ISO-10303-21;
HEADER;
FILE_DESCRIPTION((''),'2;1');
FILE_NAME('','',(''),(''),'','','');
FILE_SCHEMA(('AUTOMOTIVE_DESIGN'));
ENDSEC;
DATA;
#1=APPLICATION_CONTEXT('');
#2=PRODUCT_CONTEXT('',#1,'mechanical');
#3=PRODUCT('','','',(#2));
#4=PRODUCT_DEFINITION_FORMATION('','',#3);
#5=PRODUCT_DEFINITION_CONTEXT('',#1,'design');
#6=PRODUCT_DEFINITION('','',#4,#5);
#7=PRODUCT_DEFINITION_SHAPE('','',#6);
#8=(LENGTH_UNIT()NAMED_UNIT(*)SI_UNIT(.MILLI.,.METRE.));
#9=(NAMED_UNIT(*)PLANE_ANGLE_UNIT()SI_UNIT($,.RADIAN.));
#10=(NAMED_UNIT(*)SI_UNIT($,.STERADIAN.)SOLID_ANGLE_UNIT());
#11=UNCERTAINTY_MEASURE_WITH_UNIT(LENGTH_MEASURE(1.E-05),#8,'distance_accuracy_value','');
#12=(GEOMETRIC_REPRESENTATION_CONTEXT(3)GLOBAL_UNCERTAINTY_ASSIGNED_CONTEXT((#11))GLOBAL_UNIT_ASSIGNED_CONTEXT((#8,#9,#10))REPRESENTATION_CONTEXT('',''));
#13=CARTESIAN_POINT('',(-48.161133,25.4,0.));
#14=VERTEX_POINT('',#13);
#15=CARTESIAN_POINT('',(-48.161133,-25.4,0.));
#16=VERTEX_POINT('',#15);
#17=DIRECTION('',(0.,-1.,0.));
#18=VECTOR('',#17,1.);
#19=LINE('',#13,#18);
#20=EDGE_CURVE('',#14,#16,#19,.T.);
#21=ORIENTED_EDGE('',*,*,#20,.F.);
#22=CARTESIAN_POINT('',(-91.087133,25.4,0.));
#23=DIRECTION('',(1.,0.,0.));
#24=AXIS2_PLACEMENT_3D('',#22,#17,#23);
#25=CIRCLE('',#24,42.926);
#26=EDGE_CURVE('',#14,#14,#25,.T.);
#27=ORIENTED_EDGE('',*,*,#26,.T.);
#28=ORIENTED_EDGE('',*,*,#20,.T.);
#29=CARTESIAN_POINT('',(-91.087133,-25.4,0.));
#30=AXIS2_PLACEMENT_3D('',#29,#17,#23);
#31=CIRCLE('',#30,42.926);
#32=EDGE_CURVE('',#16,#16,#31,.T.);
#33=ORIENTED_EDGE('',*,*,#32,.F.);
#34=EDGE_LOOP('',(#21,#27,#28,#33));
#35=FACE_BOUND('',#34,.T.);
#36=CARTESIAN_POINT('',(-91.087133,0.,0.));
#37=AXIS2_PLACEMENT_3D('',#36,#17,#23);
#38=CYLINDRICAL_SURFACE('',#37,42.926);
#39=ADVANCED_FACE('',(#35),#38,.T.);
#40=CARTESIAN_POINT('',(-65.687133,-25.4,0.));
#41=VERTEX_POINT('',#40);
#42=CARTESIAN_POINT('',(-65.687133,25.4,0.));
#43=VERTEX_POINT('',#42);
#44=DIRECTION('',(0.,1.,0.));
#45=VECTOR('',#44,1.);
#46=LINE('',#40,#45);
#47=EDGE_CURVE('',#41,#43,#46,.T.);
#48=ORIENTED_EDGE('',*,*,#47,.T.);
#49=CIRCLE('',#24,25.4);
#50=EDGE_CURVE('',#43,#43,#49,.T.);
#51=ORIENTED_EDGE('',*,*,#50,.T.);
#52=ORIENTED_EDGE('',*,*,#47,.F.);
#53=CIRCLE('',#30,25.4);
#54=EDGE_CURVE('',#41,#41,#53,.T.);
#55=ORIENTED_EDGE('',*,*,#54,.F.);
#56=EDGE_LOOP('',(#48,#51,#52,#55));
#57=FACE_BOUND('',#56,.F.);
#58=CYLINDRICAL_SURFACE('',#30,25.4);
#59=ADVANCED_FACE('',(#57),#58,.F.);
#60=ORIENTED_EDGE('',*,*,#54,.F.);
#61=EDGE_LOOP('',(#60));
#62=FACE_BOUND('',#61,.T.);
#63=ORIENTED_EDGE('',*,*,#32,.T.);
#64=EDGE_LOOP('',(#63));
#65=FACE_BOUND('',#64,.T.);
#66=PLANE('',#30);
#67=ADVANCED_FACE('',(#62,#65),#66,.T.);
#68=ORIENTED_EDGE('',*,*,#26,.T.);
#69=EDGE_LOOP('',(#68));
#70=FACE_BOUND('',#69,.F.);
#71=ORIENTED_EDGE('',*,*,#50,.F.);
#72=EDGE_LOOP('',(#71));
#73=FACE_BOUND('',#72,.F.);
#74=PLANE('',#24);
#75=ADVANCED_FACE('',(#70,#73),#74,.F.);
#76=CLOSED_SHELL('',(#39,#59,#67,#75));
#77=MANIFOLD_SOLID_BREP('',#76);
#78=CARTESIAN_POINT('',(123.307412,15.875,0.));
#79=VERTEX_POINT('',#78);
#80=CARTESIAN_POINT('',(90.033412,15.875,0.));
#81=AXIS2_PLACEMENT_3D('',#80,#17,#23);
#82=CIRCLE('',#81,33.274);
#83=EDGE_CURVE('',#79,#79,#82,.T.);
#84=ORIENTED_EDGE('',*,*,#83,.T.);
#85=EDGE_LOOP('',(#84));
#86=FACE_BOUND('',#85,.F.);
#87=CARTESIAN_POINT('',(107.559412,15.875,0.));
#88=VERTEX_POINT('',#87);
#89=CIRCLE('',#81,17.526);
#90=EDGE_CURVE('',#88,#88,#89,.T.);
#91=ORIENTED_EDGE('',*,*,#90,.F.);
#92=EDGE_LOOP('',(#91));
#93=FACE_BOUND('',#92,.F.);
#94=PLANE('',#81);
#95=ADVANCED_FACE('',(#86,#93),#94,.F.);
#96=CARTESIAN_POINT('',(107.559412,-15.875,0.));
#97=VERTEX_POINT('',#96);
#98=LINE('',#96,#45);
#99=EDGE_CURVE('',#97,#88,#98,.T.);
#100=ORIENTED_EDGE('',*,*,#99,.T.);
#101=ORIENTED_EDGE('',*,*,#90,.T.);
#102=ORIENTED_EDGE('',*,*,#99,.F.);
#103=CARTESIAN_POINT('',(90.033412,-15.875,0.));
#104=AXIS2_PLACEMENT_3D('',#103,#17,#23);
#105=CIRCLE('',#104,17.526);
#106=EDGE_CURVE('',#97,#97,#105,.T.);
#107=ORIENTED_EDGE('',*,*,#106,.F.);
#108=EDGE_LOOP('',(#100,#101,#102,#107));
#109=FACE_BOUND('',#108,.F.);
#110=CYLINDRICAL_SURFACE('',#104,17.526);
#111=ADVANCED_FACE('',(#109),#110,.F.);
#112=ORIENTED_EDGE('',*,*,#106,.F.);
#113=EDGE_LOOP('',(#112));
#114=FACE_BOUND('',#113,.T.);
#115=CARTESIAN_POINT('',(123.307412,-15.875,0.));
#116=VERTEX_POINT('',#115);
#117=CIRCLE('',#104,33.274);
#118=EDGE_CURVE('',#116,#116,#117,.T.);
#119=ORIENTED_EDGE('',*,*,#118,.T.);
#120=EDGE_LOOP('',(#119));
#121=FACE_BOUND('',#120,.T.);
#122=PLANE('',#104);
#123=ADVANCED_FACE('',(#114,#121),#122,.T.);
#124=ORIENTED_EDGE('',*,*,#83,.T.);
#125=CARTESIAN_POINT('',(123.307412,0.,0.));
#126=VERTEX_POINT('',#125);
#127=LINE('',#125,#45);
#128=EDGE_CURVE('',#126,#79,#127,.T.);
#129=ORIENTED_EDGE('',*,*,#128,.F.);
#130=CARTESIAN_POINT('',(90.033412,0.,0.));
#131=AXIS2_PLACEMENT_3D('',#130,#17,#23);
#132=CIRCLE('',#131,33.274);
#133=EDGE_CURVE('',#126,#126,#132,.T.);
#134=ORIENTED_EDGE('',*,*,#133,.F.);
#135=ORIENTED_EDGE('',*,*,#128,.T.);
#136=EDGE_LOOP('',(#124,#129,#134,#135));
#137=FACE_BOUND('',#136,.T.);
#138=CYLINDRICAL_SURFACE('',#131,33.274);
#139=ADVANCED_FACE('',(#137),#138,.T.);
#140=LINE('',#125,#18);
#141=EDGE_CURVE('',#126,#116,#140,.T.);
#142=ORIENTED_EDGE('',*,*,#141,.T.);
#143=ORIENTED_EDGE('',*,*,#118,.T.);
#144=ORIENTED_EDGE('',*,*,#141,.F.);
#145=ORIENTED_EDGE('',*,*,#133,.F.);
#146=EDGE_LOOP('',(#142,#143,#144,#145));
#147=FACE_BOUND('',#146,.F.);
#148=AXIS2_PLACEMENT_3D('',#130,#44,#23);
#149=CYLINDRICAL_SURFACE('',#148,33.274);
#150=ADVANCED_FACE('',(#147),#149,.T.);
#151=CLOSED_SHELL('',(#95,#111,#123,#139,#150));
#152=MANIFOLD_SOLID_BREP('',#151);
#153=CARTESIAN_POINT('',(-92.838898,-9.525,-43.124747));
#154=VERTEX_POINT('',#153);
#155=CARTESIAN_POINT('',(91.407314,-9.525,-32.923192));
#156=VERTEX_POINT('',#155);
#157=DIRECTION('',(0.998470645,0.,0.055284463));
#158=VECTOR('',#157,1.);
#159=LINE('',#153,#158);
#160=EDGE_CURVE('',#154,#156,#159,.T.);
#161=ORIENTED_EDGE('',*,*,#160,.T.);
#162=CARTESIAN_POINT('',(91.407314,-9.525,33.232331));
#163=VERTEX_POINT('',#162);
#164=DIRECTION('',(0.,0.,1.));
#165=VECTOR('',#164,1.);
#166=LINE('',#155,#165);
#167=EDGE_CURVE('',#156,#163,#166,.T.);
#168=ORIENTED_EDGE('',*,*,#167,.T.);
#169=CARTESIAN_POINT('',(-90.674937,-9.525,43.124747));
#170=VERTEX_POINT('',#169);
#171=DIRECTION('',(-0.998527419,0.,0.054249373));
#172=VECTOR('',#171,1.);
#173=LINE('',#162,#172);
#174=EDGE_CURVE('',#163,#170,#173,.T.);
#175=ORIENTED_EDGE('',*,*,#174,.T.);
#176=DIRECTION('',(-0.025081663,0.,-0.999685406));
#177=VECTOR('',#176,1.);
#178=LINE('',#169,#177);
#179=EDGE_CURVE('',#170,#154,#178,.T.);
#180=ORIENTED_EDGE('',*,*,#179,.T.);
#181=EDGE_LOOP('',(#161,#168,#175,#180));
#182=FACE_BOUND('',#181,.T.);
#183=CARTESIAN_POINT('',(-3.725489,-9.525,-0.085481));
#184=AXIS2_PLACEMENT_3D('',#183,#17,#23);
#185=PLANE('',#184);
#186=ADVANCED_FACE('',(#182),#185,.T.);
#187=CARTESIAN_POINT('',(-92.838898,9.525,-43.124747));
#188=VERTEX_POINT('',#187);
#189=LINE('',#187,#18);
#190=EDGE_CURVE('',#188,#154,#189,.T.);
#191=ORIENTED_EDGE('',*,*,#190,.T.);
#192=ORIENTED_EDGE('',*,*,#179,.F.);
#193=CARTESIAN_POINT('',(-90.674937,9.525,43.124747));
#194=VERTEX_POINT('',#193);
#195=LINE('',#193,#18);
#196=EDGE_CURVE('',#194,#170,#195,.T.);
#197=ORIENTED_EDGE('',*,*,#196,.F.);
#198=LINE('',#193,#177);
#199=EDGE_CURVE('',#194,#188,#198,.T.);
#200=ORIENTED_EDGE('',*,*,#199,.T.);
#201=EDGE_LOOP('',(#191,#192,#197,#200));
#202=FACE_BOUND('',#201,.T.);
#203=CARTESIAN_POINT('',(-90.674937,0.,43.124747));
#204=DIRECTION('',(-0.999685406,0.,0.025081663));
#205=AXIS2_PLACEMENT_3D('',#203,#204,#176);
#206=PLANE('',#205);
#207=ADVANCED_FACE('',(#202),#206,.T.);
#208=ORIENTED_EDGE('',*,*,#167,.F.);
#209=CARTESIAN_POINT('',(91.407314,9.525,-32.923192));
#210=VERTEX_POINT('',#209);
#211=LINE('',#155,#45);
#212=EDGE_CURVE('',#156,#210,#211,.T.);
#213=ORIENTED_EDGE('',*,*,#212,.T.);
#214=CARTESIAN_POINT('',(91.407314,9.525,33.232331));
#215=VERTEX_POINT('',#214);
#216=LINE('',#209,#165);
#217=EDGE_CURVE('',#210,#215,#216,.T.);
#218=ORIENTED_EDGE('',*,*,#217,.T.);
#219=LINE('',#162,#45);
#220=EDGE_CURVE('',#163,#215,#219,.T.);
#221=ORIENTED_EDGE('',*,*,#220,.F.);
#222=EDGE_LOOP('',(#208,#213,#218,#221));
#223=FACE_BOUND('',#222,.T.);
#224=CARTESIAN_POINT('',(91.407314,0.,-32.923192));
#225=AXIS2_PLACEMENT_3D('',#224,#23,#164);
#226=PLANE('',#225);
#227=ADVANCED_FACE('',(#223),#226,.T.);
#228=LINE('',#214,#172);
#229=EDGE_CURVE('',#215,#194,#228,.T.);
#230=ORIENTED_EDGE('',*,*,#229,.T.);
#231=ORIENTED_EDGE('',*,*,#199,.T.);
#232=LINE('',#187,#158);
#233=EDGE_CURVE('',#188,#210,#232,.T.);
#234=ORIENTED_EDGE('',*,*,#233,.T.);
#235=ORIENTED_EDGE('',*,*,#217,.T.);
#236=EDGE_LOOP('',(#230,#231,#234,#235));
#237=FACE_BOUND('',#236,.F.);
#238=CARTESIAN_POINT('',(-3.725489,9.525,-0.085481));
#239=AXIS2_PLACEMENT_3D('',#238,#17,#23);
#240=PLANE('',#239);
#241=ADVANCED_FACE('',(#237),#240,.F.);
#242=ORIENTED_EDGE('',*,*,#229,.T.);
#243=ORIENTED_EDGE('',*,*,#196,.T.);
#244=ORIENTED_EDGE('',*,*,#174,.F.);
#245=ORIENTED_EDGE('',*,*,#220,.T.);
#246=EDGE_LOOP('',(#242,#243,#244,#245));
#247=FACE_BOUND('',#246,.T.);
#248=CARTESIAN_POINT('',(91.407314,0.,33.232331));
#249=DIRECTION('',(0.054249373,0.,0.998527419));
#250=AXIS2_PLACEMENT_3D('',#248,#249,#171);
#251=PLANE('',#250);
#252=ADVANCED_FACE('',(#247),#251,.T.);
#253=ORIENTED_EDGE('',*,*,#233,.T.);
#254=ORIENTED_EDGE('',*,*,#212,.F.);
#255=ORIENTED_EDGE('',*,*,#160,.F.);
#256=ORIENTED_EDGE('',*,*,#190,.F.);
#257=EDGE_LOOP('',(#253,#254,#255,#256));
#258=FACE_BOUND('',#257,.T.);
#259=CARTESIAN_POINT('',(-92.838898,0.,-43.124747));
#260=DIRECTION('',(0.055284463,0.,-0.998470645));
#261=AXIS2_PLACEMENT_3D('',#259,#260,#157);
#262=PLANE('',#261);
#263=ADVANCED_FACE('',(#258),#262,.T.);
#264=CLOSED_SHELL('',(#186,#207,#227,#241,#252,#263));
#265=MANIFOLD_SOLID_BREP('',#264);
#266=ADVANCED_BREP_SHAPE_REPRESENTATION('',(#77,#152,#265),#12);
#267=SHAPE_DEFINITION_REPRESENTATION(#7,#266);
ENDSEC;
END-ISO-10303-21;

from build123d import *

# Parameters (mm, degrees)
F0_R          = 42.926
F2_DEPTH      = 25.4
F2_DEPTH_BACK = 25.4
F1_R          = 33.274
F3_DEPTH      = 15.875
F3_DEPTH_BACK = 15.875
F5_DEPTH      = 9.525
F5_DEPTH_BACK = 9.525
F6_R          = 25.4
F7_DEPTH      = 132.39676
F8_R          = 17.526
F9_DEPTH      = 95.20603


with BuildPart() as f2:
    # F0 (on Front) → F2 (new body, two sides)
    with BuildSketch(Plane.XZ) as f2_sk:
        with Locations((-91.0871326923, 0)):
            Circle(F0_R)
    extrude(amount=F2_DEPTH)
    extrude(f2_sk.sketch, amount=-F2_DEPTH_BACK)

    # F6 (on face) → F7 (cut)
    with BuildSketch(Plane.XZ.offset(25.4)):
        with Locations((-91.0871326923, 0)):
            Circle(F6_R)
    extrude(amount=-F7_DEPTH, mode=Mode.SUBTRACT)


with BuildPart() as f3:
    # F1 (on Front) → F3 (new body, two sides)
    with BuildSketch(Plane.XZ) as f3_sk:
        with Locations((90.0334119797, 0)):
            Circle(F1_R)
    extrude(amount=-F3_DEPTH)
    extrude(f3_sk.sketch, amount=F3_DEPTH_BACK)

    # F8 (on face) → F9 (cut)
    with BuildSketch(Plane.XZ.offset(15.875)):
        with Locations((90.0334119797, 0)):
            Circle(F8_R)
    extrude(amount=-F9_DEPTH, mode=Mode.SUBTRACT)


with BuildPart() as f5:
    # F4 (on Front) → F5 (new body, two sides)
    with BuildSketch(Plane.XZ) as f5_sk:
        Polygon((91.4073139429, 33.2323312759), (-90.6749367714, 43.1247465312), (-92.8388983011, -43.1247465312), (91.4073139429, -32.9231917858), align=None)
    extrude(amount=F5_DEPTH)
    extrude(f5_sk.sketch, amount=-F5_DEPTH_BACK)


solid = Compound([f2.part, f3.part, f5.part])
